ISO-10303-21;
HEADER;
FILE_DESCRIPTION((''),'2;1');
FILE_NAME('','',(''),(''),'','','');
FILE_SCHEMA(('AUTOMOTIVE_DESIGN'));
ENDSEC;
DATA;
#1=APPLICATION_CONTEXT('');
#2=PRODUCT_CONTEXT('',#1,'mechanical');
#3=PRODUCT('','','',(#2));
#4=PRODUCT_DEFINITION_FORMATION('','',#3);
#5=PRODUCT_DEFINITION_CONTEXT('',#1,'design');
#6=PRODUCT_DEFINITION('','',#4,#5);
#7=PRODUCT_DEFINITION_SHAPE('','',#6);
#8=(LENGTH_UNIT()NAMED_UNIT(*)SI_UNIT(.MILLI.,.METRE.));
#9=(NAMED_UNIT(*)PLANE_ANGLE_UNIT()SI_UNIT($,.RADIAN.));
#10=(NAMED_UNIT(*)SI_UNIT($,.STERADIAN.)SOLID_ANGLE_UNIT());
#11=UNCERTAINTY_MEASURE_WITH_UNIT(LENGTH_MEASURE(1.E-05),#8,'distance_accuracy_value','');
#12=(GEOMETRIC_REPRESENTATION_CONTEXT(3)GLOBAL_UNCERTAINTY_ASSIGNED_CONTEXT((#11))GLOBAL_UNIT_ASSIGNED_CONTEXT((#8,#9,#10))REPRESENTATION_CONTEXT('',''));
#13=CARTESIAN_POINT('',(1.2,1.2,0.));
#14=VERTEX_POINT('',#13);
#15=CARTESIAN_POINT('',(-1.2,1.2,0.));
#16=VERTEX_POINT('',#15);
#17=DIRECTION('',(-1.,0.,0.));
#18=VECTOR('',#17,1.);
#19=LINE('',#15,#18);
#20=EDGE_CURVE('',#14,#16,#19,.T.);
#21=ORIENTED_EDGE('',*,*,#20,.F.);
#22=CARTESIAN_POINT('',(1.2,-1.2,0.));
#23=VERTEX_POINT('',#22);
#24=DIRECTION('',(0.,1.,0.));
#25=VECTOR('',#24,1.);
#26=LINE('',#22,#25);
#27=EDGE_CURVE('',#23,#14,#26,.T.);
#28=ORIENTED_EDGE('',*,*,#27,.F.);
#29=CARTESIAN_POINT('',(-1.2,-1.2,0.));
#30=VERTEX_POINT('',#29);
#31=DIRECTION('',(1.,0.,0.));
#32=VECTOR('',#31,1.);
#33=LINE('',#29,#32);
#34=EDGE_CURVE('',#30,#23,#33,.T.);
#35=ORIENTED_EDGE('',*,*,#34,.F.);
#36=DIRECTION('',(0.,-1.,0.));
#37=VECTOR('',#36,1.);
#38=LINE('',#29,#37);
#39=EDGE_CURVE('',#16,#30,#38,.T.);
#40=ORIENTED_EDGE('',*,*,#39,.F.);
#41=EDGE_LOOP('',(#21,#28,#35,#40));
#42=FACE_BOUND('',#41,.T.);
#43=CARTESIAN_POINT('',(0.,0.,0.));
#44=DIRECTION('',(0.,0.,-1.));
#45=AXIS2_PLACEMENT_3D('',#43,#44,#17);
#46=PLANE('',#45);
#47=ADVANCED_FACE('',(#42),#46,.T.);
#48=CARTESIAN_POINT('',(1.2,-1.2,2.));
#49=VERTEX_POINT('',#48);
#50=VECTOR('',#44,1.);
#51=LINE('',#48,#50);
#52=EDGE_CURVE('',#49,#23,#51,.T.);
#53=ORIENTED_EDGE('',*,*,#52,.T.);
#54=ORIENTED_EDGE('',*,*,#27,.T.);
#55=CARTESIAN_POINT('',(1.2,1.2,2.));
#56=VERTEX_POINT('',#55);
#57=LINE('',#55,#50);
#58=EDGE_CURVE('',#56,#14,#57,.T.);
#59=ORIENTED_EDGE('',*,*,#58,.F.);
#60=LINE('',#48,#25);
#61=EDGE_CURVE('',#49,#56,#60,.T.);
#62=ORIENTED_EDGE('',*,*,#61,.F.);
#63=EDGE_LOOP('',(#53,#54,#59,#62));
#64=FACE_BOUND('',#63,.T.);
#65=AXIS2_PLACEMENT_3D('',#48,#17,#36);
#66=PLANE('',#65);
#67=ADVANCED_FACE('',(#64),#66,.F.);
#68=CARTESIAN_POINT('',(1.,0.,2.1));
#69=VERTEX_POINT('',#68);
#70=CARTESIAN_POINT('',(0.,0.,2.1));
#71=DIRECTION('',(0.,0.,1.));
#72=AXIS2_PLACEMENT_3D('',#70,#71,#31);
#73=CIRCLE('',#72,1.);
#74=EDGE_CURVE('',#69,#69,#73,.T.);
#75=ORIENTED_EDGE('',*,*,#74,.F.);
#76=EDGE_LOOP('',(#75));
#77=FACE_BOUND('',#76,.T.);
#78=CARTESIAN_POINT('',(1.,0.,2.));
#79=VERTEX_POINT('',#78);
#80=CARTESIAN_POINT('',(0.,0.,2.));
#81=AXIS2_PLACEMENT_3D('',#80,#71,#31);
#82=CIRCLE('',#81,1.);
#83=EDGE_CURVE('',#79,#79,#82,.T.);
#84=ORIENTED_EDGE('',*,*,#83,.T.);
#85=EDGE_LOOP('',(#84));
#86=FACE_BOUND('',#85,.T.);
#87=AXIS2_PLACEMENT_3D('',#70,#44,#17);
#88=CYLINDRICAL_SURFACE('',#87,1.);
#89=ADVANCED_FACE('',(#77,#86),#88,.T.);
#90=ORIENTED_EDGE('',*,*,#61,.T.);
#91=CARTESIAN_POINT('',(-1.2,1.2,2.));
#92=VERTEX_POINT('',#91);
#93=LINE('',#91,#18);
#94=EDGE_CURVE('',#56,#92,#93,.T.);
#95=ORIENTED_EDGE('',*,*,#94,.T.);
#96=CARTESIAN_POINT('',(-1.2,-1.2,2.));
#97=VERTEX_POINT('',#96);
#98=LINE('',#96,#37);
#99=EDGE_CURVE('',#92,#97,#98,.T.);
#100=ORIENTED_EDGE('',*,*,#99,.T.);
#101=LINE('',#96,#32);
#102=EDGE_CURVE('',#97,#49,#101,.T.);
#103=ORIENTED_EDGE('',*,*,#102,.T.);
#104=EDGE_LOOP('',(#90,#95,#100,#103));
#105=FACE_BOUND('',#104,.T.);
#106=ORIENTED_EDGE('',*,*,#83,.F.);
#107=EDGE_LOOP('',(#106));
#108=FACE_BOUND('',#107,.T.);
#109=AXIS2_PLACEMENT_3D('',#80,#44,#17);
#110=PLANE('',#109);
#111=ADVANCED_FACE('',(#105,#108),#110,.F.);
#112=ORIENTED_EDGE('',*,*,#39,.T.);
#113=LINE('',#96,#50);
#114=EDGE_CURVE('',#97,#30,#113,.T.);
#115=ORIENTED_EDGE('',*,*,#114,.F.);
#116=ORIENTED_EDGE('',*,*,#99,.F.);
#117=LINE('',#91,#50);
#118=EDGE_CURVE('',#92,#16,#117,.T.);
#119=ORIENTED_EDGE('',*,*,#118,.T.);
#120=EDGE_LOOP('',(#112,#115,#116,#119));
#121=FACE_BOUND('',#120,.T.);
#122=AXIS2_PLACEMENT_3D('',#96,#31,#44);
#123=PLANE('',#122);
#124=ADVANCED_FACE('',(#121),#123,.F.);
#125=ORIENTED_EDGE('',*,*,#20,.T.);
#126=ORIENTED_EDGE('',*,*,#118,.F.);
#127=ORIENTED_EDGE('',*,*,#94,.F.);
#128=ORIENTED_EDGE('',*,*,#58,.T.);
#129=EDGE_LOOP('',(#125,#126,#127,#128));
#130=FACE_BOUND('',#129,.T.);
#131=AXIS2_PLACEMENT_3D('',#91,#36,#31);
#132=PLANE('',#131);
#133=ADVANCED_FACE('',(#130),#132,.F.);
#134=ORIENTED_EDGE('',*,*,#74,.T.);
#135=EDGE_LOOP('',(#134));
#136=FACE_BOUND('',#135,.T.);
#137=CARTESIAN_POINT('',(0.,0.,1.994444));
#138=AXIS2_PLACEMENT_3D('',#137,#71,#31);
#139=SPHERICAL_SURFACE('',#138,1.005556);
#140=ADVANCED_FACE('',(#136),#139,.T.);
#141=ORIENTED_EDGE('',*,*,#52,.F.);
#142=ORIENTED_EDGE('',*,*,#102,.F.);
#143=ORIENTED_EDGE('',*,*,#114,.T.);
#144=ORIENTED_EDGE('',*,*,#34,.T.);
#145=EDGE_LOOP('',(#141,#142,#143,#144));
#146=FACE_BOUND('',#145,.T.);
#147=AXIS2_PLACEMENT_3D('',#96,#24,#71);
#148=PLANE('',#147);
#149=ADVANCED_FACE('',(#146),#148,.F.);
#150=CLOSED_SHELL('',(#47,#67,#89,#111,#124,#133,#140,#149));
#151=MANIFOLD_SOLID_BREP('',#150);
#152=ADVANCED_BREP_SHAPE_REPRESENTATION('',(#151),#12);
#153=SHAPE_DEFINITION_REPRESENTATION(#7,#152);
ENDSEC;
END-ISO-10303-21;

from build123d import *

# Parameters (mm, degrees)
SZKIC1_W                    = 2.4
SZKIC1_H                    = 2.4
DODANIE_WYCI_GNI_CIE1_DEPTH = 2
SZKIC2_R                    = 1
DODANIE_WYCI_GNI_CIE2_DEPTH = 0.1


# Read off the part's stored shape, not the designer's step: Kopuła2
with BuildPart() as part:
    # Szkic1 → Dodanie-wyciągnięcie1 (new body)
    with BuildSketch(Plane.XY):
        Rectangle(SZKIC1_W, SZKIC1_H)
    extrude(amount=DODANIE_WYCI_GNI_CIE1_DEPTH)

    # Szkic2 → Dodanie-wyciągnięcie2 (add)
    with BuildSketch(Plane.XY.offset(2)):
        Circle(SZKIC2_R)
    extrude(amount=DODANIE_WYCI_GNI_CIE2_DEPTH)

    # Kopuła2 outline → Kopuła2 (revolve)
    with BuildSketch(Plane.XZ):
        with BuildLine():
            Line((0, 2.1), (1, 2.099999999))
            ThreePointArc((1, 2.099999999), (0.672681203, 2.741868002), (0, 3))
            Line((0, 3), (0, 2.1))
        make_face()
    revolve(axis=Axis((0, 0, 0), (0, 0, 1)))


solid = part.part
